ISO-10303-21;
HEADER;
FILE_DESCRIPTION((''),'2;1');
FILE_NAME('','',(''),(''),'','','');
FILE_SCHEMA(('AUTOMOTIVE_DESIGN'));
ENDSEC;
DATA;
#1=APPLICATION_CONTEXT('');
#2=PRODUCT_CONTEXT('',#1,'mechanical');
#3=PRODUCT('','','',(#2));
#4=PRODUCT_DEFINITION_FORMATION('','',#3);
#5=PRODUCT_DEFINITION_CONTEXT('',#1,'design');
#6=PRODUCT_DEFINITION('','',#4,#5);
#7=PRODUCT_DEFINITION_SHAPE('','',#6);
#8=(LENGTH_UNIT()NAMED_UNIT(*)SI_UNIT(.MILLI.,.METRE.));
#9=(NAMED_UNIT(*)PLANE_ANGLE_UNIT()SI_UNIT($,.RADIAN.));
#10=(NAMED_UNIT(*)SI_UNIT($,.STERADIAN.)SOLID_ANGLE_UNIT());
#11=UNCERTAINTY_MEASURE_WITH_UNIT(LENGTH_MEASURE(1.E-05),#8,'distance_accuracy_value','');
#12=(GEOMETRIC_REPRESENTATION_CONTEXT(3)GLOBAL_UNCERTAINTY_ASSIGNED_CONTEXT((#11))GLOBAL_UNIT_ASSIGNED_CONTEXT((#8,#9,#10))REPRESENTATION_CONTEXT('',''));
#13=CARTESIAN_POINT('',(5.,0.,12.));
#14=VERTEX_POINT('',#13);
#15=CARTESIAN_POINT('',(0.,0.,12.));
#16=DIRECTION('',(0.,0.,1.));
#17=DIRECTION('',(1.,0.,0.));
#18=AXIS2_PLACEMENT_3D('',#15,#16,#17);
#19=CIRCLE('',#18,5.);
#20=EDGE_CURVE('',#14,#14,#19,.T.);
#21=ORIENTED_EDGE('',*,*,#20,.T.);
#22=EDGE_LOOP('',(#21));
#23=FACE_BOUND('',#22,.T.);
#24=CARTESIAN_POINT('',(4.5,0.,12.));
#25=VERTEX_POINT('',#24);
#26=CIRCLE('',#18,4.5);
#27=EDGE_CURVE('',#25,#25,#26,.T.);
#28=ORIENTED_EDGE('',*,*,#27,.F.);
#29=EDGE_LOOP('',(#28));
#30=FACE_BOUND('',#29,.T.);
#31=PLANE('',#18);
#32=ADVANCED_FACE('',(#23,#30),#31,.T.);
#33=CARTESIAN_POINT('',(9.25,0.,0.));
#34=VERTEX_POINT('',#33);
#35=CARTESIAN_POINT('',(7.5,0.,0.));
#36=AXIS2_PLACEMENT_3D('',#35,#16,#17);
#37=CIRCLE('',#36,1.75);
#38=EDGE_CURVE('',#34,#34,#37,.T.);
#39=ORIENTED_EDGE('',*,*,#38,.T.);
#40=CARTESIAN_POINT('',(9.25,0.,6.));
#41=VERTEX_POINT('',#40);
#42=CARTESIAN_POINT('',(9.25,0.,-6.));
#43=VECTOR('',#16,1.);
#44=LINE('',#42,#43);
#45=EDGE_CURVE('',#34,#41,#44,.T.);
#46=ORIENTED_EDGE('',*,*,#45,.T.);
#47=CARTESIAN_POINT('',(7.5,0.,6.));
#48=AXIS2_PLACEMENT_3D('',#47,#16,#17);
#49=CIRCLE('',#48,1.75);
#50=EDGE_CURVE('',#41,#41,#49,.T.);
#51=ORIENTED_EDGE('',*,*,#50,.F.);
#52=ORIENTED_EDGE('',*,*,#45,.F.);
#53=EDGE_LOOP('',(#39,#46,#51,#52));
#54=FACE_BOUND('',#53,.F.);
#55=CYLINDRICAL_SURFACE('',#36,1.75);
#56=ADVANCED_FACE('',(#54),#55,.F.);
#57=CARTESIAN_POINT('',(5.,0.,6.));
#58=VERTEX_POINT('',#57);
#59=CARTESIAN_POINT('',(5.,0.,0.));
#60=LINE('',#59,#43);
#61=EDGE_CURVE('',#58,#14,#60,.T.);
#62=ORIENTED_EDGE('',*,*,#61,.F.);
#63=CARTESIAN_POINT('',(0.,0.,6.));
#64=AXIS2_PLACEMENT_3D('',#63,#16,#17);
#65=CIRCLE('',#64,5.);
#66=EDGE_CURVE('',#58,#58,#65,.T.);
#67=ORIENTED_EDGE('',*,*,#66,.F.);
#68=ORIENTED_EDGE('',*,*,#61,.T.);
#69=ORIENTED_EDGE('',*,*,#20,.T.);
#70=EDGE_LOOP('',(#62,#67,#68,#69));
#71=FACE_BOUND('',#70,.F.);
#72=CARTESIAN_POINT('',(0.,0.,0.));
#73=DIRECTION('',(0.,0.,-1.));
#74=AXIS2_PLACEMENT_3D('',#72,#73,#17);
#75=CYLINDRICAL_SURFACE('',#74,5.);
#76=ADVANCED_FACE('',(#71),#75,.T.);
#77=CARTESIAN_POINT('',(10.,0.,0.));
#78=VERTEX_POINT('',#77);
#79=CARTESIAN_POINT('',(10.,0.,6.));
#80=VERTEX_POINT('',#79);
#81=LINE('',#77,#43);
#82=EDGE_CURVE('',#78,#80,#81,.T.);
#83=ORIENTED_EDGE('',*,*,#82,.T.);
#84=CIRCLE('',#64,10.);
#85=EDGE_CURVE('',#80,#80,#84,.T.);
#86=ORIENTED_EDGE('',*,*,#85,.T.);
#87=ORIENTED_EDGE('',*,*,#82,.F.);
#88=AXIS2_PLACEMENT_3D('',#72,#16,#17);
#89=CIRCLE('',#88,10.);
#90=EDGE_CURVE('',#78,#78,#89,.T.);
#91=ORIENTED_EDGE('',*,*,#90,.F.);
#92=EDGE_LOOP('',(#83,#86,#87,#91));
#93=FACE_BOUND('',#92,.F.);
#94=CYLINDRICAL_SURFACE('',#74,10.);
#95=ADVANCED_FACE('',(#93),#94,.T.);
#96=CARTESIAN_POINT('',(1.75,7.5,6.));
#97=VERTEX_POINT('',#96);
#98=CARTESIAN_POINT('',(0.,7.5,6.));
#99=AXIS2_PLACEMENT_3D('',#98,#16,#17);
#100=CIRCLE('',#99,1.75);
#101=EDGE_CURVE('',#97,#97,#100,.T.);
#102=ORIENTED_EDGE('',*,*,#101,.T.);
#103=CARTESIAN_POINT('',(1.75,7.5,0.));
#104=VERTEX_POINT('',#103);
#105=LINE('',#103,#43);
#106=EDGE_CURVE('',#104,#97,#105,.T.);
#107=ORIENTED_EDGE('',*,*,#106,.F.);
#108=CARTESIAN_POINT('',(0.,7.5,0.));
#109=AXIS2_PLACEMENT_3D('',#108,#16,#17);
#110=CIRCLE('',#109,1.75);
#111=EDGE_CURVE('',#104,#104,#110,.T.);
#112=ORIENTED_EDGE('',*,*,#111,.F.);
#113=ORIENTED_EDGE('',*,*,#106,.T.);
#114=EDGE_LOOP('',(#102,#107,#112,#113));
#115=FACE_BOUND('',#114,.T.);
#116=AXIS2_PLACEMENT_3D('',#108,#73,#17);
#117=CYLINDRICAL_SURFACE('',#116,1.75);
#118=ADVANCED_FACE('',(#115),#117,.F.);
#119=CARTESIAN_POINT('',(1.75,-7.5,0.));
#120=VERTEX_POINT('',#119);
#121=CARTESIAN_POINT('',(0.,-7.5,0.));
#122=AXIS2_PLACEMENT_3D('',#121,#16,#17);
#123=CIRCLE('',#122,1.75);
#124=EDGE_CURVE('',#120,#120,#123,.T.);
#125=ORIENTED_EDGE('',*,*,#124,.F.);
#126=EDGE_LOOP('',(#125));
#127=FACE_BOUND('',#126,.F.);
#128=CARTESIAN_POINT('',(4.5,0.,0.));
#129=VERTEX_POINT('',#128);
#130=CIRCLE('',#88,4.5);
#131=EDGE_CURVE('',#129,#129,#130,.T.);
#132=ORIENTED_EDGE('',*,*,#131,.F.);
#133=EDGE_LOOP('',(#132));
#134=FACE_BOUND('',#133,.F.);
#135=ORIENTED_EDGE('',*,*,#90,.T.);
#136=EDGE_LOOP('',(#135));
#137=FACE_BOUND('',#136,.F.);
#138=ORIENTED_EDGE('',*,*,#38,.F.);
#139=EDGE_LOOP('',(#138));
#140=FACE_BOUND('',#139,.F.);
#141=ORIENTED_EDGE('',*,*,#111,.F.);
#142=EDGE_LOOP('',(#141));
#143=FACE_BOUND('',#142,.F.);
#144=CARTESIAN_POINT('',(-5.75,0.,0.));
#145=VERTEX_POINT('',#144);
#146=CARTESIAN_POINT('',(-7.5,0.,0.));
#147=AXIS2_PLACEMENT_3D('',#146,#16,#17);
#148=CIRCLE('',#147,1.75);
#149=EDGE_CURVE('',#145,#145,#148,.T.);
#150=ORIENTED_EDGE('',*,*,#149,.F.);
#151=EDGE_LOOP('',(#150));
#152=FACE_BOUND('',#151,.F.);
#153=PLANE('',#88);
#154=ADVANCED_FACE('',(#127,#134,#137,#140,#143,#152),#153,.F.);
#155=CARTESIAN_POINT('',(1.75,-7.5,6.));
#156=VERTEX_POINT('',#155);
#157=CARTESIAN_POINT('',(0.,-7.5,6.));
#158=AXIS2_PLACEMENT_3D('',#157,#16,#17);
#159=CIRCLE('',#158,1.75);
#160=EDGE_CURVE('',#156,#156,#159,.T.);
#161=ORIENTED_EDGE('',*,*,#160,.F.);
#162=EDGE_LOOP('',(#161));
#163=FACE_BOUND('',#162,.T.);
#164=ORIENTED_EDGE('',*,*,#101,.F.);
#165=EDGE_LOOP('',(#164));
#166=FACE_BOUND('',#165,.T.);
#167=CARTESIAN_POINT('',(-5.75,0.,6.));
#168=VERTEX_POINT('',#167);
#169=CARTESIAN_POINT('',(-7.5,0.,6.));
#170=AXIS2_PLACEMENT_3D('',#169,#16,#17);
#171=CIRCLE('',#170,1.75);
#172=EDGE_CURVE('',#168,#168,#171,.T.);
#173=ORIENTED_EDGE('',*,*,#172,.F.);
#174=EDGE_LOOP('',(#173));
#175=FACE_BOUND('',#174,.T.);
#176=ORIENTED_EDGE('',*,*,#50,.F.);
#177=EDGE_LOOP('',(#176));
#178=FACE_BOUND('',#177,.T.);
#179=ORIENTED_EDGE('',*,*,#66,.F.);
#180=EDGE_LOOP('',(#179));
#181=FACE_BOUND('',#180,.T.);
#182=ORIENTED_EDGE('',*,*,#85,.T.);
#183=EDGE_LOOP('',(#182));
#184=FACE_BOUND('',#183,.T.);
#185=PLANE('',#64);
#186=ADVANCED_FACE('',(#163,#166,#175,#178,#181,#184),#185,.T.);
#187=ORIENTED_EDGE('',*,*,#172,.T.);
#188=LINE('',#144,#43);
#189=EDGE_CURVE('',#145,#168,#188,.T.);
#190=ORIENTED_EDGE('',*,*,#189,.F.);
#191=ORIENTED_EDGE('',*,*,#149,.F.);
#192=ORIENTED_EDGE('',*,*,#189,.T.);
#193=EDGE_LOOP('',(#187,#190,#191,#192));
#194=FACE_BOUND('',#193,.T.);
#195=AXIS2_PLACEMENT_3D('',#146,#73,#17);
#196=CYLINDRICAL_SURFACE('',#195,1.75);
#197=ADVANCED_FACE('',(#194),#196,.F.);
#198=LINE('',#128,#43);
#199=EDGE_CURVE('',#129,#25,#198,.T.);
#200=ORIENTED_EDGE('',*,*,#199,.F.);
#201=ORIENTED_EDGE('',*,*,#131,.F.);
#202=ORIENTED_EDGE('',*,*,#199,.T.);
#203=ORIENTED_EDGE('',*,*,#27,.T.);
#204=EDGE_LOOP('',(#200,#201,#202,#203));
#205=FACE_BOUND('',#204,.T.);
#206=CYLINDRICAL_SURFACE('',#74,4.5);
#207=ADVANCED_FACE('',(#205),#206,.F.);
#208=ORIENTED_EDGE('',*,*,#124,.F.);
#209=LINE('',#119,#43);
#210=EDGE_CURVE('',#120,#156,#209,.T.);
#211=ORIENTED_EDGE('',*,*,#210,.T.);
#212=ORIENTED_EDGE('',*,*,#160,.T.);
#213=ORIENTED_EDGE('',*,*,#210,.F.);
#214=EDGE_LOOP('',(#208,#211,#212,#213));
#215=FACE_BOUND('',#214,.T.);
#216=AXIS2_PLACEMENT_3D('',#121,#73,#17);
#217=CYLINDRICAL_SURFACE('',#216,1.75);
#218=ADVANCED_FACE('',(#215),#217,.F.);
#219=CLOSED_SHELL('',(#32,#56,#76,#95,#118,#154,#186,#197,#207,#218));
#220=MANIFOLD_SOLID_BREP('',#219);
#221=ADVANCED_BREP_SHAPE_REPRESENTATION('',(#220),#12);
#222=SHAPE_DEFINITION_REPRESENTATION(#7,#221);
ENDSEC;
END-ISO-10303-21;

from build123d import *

# Parameters (mm, degrees)
F1_R     = 10
F2_DEPTH = 6
F0_R     = 5
F0_R_2   = 4.5
F0_R_3   = 1.75
F3_DEPTH = 6
F4_DEPTH = 6
F7_DEPTH = 12


# Not quite as in the source:
# - the program builds the solid bodies; features that only make, move or delete a surface that nothing else refers to are left out


with BuildPart() as f2:
    # F1 (on Top) → F2 (new body)
    with BuildSketch(Plane.XY):
        Circle(F1_R)
    extrude(amount=F2_DEPTH)

    # F0 (on Top) → F3 (cut, symmetric)
    with BuildSketch(Plane.XY):
        Circle(F0_R)
        Circle(F0_R_2, mode=Mode.SUBTRACT)
        with Locations((0, 7.5)):
            Circle(F0_R_3)
        with Locations((-7.5, 0)):
            Circle(F0_R_3)
        with Locations((0, -7.5)):
            Circle(F0_R_3)
        with Locations((7.5, 0)):
            Circle(F0_R_3)
    extrude(amount=F3_DEPTH, both=True, mode=Mode.SUBTRACT)

    # F4 (cut): a face of the model
    f4_faces = [f2.faces().sort_by_distance(p)[0] for p in [
        (0, 0, 6),
    ]]
    extrude(f4_faces, amount=-F4_DEPTH, mode=Mode.SUBTRACT)

    # F0 (on Top) → F7 (join)
    with BuildSketch(Plane.XY):
        Circle(F0_R)
        Circle(F0_R_2, mode=Mode.SUBTRACT)
    extrude(amount=F7_DEPTH)


solid = f2.part
